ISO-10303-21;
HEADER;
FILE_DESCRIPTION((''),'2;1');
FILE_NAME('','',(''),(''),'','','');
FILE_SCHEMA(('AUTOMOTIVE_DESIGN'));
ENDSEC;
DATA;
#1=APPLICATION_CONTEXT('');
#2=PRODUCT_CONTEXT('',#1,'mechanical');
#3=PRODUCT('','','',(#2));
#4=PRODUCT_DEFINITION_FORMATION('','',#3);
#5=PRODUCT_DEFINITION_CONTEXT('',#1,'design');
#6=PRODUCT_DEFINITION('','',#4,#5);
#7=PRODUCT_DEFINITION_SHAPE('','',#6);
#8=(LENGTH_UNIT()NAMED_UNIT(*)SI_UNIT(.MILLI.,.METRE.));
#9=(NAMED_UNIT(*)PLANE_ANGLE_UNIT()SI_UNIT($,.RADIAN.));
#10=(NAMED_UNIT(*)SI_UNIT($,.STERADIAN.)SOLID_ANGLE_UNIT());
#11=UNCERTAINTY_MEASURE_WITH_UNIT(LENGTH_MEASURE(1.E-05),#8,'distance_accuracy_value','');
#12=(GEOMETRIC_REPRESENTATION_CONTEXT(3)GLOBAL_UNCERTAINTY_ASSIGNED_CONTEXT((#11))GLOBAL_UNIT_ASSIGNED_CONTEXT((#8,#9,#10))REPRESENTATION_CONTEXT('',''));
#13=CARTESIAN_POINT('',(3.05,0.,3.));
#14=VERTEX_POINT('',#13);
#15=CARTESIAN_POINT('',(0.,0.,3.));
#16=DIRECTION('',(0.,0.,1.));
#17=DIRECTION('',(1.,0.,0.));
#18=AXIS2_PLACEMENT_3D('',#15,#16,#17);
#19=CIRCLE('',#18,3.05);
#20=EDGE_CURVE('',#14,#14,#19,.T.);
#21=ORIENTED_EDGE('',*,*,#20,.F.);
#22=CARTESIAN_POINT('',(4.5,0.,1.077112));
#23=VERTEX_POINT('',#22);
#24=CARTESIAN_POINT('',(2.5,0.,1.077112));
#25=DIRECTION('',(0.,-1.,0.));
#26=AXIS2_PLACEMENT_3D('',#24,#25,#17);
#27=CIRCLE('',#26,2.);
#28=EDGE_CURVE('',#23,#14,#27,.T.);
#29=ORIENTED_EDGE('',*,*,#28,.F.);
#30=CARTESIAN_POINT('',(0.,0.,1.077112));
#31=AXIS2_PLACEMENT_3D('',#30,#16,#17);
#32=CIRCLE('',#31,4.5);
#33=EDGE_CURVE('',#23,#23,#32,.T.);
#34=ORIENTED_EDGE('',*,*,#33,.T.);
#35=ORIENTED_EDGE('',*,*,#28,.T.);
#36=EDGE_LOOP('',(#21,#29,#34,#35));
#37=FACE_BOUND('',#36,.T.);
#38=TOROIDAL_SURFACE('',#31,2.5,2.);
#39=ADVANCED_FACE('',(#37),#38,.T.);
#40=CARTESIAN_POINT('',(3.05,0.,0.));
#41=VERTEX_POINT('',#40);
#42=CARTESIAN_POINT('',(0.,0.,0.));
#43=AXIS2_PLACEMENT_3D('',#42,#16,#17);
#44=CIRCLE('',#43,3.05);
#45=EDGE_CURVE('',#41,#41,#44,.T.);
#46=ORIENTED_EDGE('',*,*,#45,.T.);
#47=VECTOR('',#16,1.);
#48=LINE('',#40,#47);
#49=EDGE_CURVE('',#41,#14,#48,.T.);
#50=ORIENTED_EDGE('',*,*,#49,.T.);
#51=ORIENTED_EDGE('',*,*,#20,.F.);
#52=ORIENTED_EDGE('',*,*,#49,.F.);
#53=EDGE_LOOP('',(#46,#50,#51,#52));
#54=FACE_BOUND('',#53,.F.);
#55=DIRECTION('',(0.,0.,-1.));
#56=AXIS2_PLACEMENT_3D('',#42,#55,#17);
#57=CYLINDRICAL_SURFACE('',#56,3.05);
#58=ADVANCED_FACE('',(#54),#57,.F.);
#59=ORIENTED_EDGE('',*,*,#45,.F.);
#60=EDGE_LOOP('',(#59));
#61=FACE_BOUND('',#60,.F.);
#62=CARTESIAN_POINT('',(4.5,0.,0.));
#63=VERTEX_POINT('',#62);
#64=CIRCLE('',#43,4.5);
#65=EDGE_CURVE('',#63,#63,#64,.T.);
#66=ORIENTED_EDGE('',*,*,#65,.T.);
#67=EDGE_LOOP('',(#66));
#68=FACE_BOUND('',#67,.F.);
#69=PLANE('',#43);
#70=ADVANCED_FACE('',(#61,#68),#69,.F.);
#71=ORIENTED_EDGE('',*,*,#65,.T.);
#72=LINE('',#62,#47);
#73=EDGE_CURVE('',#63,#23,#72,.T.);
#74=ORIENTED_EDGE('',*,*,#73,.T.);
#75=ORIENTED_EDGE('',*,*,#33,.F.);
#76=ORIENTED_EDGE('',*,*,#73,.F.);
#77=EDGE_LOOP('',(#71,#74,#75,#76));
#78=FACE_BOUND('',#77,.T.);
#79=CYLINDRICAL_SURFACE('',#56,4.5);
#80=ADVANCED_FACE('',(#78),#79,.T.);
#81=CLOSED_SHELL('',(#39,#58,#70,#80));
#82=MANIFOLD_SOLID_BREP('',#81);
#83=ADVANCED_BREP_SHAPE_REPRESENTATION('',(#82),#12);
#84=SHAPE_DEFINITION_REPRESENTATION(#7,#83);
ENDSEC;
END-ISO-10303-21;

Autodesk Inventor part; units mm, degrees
ref_plane "YZ Plane" through (0, 0, 0) normal (1, 0, 0) x (0, 1, 0)
ref_plane "XZ Plane" through (0, 0, 0) normal (0, 1, 0) x (-1, 0, 0)
ref_plane "XY Plane" through (0, 0, 0) normal (0, 0, 1) x (1, 0, 0)
sketch "Skizze1" plane through (0, 0, 0) normal (0, 0, 1) x (1, 0, 0)
  circle A0 centre (0, 0) radius 3.05
  circle A1 centre (0, 0) radius 4.5
  dimension "d0" = 6.1
  dimension "d5" = 4.5
extrude "Extrusion1" add sketch "Skizze1" along normal blind 3
fillet "Rundung1" radius 2 1 edges at (-4.5, 0, 3)
properties part number "FormAxisBreak"
